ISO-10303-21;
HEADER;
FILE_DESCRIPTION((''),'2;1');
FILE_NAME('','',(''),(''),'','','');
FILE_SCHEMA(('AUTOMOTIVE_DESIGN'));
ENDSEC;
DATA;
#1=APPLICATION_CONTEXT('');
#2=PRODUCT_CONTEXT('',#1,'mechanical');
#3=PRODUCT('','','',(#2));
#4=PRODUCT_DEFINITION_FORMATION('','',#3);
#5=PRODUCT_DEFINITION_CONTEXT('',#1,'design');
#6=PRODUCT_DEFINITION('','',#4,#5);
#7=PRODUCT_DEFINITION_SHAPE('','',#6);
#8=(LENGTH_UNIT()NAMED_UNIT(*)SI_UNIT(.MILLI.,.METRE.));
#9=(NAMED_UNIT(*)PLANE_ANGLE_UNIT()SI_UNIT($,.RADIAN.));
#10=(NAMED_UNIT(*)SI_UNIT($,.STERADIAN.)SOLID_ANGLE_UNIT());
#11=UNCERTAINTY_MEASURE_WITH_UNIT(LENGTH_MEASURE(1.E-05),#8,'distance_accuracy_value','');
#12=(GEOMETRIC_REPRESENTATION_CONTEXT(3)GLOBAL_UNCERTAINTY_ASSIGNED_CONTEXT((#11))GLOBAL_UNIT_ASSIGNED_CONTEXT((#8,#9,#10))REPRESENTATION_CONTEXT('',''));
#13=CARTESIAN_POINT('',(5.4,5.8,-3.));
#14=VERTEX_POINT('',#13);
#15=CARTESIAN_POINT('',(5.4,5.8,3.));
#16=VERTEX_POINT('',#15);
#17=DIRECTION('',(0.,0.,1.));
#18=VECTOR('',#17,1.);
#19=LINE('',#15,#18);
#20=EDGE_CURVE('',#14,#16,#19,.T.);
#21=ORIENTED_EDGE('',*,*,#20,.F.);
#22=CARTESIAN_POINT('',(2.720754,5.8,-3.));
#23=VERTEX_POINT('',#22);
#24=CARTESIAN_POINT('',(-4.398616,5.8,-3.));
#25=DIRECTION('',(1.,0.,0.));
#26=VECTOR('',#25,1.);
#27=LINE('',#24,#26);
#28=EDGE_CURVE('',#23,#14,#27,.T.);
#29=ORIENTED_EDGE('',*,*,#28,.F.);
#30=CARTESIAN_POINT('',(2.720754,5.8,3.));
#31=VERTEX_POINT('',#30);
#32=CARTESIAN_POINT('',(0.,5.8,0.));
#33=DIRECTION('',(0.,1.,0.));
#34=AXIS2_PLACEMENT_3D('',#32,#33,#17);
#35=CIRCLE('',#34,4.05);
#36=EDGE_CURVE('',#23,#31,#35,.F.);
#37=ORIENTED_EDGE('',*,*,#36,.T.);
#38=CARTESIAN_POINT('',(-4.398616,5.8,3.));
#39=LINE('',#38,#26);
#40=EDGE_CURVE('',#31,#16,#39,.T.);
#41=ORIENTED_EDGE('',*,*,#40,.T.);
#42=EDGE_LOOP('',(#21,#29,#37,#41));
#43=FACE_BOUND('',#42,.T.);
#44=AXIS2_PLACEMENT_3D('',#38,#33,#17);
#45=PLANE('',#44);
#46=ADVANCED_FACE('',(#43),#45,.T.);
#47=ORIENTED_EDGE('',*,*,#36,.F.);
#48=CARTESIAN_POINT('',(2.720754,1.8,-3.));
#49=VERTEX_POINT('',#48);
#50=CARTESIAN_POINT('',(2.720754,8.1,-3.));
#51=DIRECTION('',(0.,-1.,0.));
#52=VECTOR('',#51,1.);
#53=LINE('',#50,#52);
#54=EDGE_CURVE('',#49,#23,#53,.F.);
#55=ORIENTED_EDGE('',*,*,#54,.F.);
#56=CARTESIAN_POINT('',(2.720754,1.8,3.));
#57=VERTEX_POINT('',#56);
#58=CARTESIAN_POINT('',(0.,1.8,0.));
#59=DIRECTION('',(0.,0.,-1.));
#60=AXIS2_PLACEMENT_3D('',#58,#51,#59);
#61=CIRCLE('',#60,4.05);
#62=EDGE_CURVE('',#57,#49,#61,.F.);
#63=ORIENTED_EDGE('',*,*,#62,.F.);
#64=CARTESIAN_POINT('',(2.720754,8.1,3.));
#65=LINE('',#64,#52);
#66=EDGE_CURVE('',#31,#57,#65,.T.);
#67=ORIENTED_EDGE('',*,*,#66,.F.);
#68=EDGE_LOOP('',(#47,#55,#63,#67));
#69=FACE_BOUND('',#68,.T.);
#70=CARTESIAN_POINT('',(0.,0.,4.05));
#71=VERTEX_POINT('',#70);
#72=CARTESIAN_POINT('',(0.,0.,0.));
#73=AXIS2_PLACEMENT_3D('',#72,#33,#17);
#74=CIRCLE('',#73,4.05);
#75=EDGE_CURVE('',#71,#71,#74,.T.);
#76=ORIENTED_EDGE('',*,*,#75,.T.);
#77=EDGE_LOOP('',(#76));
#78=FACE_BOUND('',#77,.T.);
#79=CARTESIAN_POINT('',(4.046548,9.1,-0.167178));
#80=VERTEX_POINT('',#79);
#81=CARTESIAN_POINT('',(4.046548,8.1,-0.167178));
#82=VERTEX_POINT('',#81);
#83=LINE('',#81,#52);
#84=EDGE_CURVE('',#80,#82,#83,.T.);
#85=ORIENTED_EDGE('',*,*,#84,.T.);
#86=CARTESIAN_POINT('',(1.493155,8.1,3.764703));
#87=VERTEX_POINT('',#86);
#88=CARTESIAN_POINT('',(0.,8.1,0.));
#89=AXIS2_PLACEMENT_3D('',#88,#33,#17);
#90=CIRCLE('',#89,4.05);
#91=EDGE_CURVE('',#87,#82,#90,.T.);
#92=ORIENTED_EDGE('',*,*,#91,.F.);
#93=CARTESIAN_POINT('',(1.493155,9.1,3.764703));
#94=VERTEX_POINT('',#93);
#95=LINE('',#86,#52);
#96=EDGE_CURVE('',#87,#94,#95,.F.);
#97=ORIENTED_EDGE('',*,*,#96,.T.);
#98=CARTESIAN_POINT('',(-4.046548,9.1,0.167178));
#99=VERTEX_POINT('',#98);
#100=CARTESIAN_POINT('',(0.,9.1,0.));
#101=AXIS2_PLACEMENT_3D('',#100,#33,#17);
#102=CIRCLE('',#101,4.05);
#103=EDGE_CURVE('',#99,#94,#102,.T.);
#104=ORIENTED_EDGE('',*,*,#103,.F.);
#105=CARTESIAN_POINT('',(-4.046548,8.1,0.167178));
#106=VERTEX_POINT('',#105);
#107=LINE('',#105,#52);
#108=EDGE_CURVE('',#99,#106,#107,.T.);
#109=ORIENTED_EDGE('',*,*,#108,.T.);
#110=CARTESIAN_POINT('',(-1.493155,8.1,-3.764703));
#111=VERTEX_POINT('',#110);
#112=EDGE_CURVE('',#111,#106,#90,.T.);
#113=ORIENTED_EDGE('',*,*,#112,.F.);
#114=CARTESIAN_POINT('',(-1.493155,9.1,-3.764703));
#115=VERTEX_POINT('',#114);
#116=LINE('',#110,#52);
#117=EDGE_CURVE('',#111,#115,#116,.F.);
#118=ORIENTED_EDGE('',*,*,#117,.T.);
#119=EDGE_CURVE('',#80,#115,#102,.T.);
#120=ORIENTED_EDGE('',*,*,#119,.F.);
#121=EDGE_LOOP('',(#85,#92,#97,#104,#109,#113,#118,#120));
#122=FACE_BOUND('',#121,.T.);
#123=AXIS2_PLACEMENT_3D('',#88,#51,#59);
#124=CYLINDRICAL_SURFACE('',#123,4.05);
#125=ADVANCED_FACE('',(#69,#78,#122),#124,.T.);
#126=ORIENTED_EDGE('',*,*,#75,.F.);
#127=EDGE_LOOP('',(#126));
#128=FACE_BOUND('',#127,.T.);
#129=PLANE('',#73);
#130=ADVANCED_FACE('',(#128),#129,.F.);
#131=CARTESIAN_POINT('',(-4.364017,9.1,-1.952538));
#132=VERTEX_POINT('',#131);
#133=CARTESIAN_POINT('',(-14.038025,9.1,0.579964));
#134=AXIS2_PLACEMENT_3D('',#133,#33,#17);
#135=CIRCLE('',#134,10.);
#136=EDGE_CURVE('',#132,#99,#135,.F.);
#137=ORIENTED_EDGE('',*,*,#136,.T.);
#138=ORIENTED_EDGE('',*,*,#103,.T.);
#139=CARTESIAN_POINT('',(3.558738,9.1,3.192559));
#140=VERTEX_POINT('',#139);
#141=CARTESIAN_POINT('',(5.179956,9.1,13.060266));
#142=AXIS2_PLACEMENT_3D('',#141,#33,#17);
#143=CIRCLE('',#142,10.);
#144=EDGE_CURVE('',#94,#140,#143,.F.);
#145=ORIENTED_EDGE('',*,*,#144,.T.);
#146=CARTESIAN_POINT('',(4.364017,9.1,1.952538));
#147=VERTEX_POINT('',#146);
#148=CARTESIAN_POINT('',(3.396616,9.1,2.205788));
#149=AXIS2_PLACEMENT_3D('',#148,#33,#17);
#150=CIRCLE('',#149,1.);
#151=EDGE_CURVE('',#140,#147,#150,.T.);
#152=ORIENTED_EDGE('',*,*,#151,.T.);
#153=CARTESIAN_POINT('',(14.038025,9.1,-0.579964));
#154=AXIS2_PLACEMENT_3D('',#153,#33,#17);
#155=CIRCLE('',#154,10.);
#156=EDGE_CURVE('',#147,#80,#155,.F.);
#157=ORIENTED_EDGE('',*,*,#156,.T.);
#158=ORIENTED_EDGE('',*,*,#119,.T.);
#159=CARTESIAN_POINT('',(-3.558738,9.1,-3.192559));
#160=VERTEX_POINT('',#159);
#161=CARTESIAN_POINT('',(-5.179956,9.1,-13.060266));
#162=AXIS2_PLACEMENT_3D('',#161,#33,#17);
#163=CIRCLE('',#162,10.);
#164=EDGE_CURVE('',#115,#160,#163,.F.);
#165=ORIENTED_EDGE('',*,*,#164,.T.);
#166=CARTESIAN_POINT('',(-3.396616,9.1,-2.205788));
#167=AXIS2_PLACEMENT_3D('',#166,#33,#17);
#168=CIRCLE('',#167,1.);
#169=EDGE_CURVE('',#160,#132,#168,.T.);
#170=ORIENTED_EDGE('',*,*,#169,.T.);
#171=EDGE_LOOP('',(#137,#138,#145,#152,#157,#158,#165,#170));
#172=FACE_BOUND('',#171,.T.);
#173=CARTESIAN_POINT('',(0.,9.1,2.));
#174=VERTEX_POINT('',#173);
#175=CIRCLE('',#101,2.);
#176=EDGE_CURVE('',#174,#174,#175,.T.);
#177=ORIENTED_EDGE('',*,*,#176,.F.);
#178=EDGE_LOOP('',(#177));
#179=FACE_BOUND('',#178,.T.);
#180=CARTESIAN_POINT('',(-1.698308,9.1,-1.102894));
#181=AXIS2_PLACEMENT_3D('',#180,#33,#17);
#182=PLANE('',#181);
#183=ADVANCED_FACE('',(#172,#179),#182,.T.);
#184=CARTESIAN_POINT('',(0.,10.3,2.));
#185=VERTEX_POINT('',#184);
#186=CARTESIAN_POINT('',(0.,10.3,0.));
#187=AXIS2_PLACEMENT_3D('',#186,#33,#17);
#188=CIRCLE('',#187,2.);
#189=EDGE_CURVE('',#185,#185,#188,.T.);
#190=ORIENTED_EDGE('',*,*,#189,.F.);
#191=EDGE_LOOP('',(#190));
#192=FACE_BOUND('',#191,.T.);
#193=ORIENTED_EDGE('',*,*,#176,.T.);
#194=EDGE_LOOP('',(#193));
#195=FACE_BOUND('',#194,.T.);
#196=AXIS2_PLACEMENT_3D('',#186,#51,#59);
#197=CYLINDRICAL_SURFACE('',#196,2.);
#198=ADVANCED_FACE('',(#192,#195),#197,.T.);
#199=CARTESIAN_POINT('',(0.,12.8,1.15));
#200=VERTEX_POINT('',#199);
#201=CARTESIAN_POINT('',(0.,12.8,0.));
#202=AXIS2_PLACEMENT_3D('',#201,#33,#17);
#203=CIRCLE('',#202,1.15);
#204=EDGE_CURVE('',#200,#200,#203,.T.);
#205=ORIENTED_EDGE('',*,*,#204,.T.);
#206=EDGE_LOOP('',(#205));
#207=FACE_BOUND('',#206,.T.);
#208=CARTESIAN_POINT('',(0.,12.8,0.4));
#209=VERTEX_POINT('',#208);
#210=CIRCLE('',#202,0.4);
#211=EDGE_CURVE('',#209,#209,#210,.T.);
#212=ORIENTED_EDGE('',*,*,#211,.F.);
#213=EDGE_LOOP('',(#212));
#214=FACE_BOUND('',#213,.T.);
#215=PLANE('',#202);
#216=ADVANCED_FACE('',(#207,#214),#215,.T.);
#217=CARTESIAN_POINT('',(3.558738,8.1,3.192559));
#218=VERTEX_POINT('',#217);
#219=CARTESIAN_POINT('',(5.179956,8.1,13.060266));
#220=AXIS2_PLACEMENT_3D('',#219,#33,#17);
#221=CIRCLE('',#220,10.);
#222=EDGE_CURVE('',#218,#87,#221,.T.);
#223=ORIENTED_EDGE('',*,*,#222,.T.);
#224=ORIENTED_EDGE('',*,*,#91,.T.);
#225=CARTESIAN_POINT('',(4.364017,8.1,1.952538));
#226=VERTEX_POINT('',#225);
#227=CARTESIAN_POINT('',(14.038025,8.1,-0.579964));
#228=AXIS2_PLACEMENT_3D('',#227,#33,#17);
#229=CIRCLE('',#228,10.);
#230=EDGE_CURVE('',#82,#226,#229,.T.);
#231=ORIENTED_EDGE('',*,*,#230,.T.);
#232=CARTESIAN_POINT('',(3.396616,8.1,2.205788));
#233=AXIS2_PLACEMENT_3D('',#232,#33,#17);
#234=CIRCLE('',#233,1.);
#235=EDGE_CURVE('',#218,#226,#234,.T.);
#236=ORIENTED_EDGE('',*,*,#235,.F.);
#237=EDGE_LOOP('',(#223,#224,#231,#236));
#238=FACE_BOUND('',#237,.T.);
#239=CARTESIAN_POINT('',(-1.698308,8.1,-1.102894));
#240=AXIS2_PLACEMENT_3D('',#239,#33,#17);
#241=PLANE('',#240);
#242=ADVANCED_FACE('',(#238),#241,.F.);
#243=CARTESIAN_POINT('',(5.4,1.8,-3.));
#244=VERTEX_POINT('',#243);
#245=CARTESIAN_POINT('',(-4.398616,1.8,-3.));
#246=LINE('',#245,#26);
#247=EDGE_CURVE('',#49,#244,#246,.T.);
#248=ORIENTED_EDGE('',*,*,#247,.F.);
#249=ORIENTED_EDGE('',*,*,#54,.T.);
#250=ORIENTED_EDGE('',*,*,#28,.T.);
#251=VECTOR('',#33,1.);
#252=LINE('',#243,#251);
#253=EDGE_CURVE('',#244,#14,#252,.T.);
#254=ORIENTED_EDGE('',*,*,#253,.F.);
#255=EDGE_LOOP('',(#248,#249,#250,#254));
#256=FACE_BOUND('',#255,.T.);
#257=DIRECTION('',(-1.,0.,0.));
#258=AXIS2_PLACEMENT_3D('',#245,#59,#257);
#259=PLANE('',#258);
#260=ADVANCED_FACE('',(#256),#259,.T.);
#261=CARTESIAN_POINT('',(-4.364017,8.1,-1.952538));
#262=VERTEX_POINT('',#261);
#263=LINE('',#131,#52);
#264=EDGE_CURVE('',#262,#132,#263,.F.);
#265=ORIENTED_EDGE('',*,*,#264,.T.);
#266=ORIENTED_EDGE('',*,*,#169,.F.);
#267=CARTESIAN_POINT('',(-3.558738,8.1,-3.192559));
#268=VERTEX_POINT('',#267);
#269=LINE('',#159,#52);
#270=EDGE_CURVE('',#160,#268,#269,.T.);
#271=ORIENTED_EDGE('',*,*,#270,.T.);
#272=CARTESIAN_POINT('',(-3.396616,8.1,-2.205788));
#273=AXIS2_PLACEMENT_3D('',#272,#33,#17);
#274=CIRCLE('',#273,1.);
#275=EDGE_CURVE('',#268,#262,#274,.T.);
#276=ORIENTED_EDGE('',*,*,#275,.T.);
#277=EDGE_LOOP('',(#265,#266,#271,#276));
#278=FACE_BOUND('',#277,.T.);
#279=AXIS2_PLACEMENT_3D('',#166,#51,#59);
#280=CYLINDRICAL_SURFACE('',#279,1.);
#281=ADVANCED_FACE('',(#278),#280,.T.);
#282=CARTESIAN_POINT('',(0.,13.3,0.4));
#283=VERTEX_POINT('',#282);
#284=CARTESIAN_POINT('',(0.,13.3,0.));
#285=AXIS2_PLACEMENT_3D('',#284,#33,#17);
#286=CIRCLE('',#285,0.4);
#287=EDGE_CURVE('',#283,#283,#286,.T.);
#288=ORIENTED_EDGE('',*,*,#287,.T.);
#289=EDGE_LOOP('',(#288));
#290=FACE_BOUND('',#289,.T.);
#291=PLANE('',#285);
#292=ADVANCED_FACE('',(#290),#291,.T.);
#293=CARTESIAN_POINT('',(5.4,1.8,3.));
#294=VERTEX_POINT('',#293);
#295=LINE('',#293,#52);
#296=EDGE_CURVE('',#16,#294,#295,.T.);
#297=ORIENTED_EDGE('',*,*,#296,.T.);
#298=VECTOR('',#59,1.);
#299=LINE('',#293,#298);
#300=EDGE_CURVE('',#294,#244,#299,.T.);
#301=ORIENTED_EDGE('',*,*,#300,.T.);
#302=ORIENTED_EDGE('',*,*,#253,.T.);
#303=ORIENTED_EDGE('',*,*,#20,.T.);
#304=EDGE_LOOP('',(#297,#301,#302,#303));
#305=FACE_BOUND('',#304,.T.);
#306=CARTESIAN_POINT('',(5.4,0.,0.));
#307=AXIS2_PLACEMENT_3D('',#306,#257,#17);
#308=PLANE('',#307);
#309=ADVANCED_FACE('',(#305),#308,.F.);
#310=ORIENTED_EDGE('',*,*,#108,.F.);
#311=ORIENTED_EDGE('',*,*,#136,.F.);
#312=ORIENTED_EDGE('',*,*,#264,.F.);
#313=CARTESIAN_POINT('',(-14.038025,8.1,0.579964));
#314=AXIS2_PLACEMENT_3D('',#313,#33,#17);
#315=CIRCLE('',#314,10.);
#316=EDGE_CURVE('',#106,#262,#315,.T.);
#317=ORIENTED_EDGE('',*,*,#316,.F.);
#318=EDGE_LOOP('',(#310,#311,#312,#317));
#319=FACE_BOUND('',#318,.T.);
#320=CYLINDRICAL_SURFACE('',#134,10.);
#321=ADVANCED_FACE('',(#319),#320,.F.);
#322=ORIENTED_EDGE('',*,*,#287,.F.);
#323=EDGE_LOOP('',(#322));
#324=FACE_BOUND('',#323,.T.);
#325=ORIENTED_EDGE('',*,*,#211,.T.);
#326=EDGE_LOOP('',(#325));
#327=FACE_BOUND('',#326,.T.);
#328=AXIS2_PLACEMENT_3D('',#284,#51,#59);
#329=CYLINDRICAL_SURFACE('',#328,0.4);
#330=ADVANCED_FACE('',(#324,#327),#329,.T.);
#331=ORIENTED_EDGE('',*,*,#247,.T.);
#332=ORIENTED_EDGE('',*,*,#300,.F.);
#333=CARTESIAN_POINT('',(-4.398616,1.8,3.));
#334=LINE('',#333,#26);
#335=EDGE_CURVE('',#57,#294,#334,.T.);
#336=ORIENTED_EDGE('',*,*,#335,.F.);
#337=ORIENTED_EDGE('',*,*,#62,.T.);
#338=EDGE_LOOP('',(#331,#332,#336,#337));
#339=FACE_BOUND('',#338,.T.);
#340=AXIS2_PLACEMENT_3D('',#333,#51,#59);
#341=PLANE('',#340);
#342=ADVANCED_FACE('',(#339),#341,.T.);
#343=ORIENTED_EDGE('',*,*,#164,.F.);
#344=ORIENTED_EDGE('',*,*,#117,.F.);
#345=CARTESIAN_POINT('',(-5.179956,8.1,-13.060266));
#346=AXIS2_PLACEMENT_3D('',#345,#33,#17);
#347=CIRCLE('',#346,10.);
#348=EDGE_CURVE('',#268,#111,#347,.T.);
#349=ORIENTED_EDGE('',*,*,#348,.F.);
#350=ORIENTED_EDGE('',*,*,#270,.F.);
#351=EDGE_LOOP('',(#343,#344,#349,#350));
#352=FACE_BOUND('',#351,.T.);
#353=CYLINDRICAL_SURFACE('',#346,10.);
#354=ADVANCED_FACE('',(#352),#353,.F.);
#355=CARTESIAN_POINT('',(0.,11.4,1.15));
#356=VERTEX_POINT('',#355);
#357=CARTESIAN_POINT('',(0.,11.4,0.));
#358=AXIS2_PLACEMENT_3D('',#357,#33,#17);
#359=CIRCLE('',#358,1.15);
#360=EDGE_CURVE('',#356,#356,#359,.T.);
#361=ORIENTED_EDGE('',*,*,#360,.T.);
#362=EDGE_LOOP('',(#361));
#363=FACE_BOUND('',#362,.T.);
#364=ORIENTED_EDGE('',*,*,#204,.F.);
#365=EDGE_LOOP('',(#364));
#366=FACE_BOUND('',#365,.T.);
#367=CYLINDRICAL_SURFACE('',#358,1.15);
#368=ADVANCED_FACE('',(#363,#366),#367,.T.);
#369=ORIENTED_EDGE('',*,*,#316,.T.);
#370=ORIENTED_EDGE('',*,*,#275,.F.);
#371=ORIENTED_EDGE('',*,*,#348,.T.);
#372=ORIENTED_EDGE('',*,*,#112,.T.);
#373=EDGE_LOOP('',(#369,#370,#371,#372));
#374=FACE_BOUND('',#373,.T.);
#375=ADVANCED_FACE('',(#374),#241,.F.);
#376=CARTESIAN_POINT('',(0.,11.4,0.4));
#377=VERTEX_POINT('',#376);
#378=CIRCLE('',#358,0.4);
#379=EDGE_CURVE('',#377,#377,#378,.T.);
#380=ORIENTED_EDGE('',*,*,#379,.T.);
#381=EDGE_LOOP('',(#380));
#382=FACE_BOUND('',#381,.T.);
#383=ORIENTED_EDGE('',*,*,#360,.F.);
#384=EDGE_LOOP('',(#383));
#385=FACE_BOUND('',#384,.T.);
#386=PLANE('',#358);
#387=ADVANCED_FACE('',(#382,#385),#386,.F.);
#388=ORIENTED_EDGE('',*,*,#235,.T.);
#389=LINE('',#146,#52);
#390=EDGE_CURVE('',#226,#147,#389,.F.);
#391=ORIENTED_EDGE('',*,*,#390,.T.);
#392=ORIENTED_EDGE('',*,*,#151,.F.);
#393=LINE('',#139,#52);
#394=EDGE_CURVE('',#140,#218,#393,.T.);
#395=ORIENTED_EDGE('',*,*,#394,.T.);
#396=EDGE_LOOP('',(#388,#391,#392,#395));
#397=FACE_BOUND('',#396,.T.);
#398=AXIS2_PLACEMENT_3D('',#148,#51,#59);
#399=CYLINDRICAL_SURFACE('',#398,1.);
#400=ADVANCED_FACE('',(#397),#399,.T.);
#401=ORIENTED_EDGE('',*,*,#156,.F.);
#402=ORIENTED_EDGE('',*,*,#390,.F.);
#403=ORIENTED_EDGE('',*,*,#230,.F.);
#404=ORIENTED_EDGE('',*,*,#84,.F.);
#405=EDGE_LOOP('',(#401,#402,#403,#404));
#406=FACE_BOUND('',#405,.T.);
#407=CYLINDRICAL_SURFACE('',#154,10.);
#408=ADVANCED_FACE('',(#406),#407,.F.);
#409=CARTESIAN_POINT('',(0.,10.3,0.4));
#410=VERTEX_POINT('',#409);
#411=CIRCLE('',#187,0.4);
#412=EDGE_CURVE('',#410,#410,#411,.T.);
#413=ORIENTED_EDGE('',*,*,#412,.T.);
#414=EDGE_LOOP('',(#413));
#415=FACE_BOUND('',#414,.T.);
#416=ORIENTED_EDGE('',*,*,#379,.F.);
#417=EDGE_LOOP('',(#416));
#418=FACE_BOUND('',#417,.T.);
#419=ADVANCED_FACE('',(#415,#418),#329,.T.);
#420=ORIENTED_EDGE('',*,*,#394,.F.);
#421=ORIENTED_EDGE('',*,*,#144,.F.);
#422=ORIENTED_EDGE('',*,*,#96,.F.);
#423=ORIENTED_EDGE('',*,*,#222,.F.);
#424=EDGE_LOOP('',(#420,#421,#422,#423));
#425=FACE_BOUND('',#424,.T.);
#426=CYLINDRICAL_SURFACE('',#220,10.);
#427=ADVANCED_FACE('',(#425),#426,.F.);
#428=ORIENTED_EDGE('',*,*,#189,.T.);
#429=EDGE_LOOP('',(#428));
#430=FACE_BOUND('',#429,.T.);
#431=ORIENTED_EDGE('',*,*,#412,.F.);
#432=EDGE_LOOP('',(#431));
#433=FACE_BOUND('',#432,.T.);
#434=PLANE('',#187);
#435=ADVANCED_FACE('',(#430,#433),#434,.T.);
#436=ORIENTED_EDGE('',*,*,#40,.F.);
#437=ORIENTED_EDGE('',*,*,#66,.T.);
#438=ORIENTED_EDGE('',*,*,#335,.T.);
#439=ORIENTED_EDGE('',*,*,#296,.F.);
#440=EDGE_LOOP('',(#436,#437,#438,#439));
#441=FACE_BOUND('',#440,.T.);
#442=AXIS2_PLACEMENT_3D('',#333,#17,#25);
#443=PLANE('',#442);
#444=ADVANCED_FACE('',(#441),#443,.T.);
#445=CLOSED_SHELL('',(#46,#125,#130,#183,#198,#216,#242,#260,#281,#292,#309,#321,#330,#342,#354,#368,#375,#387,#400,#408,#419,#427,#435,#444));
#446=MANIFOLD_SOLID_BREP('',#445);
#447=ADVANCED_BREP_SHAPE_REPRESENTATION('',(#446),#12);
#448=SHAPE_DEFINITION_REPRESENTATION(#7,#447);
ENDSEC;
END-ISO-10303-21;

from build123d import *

# Parameters (mm, degrees)
SKETCH1_R                = 4.05
BOSS_EXTRUDE1_DEPTH      = 8.1
BOSS_EXTRUDE2_DEPTH      = 1
FILLET1_R                = 10
SKETCH3_R                = 2
BOSS_EXTRUDE3_DEPTH      = 1.2
SKETCH4_R                = 0.4
BOSS_EXTRUDE4_DEPTH      = 3
BOSS_EXTRUDE5_START      = -0.5
SKETCH5_R                = 1.15
BOSS_EXTRUDE5_DEPTH      = 1.4
BOSS_EXTRUDE6_REACH      = 19.008
BOSS_EXTRUDE6_END_RADIUS = 4.05
SKETCH6_W                = 6
SKETCH6_H                = 4


with BuildPart() as part:
    # Sketch1 → Boss-Extrude1 (new body)
    with BuildSketch(Plane(origin=(0, 0, 0), x_dir=(1, 0, 0), z_dir=(0, 1, 0))):
        with Locations(Location((0, 0, 0), (0, 0, 270))):
            Circle(SKETCH1_R)
    extrude(amount=BOSS_EXTRUDE1_DEPTH)

    # Sketch2 → Boss-Extrude2 (add)
    with BuildSketch(Plane(origin=(0, 8.1, 0), x_dir=(1, 0, 0), z_dir=(0, 1, 0))):
        with BuildLine():
            ThreePointArc((-3.833548742, 1.30629401), (-2.205788092, -3.3966158), (2.752603705, -2.9708034))
            ThreePointArc((2.752603705, -2.9708034), (4.235286368, -2.750427127), (3.833548742, -1.30629401))
            ThreePointArc((3.833548742, -1.30629401), (2.205788092, 3.3966158), (-2.752603705, 2.9708034))
            ThreePointArc((-2.752603705, 2.9708034), (-4.235286368, 2.750427127), (-3.833548742, 1.30629401))
        make_face()
    extrude(amount=BOSS_EXTRUDE2_DEPTH)

    # Fillet1
    # the kernel refuses this fillet: 10 mm, written as the material it adds along each edge
    with BuildSketch(Plane(origin=(-2.752603705, 8.1, -2.9708034), x_dir=(0.8459561601363162, 0, -0.5332524497153475), z_dir=(0, 1, 0)), Plane(origin=(2.752603705, 8.1, 2.9708034), x_dir=(-0.8459561601363164, 0, 0.5332524497153472), z_dir=(0, 1, 0))) as fillet1_piece_1:
        with BuildLine():
            CenterArc((3.326797297, 9.829634829), FILLET1_R, 247.104601823, 12.304164649)
            ThreePointArc((-0.563702324, 0.617468271), (-0.214223286, 0.370473326), (0, 0))
            ThreePointArc((0, 0), (0.74439387, 0.068997894), (1.488787741, 0))
        make_face()
    extrude(amount=1)
    with BuildSketch(Plane(origin=(-3.833548742, 8.1, -1.30629401), x_dir=(-0.14306898445110627, 0, 0.9897127187664757), z_dir=(0, 1, 0)), Plane(origin=(3.833548742, 8.1, 1.30629401), x_dir=(0.14306898445110644, 0, -0.9897127187664757), z_dir=(0, 1, 0))) as fillet1_piece_2:
        with BuildLine():
            CenterArc((3.326797297, -9.829634829), FILLET1_R, 100.591233529, 12.304164649)
            ThreePointArc((-0.563702324, -0.617468271), (-0.214223286, -0.370473326), (0, 0))
            ThreePointArc((0, 0), (0.74439387, -0.068997894), (1.488787741, 0))
        make_face()
    extrude(amount=1)

    # Sketch3 → Boss-Extrude3 (add)
    with BuildSketch(Plane(origin=(0, 9.1, 0), x_dir=(1, 0, 0), z_dir=(0, 1, 0))):
        with Locations(Location((0, 0, 0), (0, 0, 270))):
            Circle(SKETCH3_R)
    extrude(amount=BOSS_EXTRUDE3_DEPTH)

    # Sketch4 → Boss-Extrude4 (add)
    with BuildSketch(Plane(origin=(0, 10.3, 0), x_dir=(1, 0, 0), z_dir=(0, 1, 0))):
        with Locations(Location((0, 0, 0), (0, 0, 270))):
            Circle(SKETCH4_R)
    extrude(amount=BOSS_EXTRUDE4_DEPTH)

    # Sketch5 → Boss-Extrude5 (add)
    with BuildSketch(Plane(origin=(0, 13.3, 0), x_dir=(1, 0, 0), z_dir=(0, 1, 0)).offset(BOSS_EXTRUDE5_START)):
        with Locations(Location((0, 0, 0), (0, 0, 270))):
            Circle(SKETCH5_R)
    extrude(amount=-BOSS_EXTRUDE5_DEPTH)

    # Boss-Extrude6: up to this cylinder (the profile starts outside it)
    boss_extrude6_end = Plane(origin=(0, 3.8, 0), z_dir=(0, -1, 0)) * Cylinder(BOSS_EXTRUDE6_END_RADIUS, 47.116, mode=Mode.PRIVATE)
    # Sketch6 → Boss-Extrude6 (add, up to the surface)
    with BuildSketch(Plane(origin=(5.4, 0, 0), x_dir=(0, 0, -1), z_dir=(1, 0, 0)), mode=Mode.PRIVATE) as boss_extrude6_sk1:
        with Locations((0, 3.8)):
            Rectangle(SKETCH6_W, SKETCH6_H)
    boss_extrude6_tool1 = extrude(boss_extrude6_sk1.sketch, amount=-BOSS_EXTRUDE6_REACH, mode=Mode.PRIVATE) - boss_extrude6_end
    add(boss_extrude6_tool1.solids().sort_by_distance((5.4, 3.8, 0))[0])


solid = part.part
